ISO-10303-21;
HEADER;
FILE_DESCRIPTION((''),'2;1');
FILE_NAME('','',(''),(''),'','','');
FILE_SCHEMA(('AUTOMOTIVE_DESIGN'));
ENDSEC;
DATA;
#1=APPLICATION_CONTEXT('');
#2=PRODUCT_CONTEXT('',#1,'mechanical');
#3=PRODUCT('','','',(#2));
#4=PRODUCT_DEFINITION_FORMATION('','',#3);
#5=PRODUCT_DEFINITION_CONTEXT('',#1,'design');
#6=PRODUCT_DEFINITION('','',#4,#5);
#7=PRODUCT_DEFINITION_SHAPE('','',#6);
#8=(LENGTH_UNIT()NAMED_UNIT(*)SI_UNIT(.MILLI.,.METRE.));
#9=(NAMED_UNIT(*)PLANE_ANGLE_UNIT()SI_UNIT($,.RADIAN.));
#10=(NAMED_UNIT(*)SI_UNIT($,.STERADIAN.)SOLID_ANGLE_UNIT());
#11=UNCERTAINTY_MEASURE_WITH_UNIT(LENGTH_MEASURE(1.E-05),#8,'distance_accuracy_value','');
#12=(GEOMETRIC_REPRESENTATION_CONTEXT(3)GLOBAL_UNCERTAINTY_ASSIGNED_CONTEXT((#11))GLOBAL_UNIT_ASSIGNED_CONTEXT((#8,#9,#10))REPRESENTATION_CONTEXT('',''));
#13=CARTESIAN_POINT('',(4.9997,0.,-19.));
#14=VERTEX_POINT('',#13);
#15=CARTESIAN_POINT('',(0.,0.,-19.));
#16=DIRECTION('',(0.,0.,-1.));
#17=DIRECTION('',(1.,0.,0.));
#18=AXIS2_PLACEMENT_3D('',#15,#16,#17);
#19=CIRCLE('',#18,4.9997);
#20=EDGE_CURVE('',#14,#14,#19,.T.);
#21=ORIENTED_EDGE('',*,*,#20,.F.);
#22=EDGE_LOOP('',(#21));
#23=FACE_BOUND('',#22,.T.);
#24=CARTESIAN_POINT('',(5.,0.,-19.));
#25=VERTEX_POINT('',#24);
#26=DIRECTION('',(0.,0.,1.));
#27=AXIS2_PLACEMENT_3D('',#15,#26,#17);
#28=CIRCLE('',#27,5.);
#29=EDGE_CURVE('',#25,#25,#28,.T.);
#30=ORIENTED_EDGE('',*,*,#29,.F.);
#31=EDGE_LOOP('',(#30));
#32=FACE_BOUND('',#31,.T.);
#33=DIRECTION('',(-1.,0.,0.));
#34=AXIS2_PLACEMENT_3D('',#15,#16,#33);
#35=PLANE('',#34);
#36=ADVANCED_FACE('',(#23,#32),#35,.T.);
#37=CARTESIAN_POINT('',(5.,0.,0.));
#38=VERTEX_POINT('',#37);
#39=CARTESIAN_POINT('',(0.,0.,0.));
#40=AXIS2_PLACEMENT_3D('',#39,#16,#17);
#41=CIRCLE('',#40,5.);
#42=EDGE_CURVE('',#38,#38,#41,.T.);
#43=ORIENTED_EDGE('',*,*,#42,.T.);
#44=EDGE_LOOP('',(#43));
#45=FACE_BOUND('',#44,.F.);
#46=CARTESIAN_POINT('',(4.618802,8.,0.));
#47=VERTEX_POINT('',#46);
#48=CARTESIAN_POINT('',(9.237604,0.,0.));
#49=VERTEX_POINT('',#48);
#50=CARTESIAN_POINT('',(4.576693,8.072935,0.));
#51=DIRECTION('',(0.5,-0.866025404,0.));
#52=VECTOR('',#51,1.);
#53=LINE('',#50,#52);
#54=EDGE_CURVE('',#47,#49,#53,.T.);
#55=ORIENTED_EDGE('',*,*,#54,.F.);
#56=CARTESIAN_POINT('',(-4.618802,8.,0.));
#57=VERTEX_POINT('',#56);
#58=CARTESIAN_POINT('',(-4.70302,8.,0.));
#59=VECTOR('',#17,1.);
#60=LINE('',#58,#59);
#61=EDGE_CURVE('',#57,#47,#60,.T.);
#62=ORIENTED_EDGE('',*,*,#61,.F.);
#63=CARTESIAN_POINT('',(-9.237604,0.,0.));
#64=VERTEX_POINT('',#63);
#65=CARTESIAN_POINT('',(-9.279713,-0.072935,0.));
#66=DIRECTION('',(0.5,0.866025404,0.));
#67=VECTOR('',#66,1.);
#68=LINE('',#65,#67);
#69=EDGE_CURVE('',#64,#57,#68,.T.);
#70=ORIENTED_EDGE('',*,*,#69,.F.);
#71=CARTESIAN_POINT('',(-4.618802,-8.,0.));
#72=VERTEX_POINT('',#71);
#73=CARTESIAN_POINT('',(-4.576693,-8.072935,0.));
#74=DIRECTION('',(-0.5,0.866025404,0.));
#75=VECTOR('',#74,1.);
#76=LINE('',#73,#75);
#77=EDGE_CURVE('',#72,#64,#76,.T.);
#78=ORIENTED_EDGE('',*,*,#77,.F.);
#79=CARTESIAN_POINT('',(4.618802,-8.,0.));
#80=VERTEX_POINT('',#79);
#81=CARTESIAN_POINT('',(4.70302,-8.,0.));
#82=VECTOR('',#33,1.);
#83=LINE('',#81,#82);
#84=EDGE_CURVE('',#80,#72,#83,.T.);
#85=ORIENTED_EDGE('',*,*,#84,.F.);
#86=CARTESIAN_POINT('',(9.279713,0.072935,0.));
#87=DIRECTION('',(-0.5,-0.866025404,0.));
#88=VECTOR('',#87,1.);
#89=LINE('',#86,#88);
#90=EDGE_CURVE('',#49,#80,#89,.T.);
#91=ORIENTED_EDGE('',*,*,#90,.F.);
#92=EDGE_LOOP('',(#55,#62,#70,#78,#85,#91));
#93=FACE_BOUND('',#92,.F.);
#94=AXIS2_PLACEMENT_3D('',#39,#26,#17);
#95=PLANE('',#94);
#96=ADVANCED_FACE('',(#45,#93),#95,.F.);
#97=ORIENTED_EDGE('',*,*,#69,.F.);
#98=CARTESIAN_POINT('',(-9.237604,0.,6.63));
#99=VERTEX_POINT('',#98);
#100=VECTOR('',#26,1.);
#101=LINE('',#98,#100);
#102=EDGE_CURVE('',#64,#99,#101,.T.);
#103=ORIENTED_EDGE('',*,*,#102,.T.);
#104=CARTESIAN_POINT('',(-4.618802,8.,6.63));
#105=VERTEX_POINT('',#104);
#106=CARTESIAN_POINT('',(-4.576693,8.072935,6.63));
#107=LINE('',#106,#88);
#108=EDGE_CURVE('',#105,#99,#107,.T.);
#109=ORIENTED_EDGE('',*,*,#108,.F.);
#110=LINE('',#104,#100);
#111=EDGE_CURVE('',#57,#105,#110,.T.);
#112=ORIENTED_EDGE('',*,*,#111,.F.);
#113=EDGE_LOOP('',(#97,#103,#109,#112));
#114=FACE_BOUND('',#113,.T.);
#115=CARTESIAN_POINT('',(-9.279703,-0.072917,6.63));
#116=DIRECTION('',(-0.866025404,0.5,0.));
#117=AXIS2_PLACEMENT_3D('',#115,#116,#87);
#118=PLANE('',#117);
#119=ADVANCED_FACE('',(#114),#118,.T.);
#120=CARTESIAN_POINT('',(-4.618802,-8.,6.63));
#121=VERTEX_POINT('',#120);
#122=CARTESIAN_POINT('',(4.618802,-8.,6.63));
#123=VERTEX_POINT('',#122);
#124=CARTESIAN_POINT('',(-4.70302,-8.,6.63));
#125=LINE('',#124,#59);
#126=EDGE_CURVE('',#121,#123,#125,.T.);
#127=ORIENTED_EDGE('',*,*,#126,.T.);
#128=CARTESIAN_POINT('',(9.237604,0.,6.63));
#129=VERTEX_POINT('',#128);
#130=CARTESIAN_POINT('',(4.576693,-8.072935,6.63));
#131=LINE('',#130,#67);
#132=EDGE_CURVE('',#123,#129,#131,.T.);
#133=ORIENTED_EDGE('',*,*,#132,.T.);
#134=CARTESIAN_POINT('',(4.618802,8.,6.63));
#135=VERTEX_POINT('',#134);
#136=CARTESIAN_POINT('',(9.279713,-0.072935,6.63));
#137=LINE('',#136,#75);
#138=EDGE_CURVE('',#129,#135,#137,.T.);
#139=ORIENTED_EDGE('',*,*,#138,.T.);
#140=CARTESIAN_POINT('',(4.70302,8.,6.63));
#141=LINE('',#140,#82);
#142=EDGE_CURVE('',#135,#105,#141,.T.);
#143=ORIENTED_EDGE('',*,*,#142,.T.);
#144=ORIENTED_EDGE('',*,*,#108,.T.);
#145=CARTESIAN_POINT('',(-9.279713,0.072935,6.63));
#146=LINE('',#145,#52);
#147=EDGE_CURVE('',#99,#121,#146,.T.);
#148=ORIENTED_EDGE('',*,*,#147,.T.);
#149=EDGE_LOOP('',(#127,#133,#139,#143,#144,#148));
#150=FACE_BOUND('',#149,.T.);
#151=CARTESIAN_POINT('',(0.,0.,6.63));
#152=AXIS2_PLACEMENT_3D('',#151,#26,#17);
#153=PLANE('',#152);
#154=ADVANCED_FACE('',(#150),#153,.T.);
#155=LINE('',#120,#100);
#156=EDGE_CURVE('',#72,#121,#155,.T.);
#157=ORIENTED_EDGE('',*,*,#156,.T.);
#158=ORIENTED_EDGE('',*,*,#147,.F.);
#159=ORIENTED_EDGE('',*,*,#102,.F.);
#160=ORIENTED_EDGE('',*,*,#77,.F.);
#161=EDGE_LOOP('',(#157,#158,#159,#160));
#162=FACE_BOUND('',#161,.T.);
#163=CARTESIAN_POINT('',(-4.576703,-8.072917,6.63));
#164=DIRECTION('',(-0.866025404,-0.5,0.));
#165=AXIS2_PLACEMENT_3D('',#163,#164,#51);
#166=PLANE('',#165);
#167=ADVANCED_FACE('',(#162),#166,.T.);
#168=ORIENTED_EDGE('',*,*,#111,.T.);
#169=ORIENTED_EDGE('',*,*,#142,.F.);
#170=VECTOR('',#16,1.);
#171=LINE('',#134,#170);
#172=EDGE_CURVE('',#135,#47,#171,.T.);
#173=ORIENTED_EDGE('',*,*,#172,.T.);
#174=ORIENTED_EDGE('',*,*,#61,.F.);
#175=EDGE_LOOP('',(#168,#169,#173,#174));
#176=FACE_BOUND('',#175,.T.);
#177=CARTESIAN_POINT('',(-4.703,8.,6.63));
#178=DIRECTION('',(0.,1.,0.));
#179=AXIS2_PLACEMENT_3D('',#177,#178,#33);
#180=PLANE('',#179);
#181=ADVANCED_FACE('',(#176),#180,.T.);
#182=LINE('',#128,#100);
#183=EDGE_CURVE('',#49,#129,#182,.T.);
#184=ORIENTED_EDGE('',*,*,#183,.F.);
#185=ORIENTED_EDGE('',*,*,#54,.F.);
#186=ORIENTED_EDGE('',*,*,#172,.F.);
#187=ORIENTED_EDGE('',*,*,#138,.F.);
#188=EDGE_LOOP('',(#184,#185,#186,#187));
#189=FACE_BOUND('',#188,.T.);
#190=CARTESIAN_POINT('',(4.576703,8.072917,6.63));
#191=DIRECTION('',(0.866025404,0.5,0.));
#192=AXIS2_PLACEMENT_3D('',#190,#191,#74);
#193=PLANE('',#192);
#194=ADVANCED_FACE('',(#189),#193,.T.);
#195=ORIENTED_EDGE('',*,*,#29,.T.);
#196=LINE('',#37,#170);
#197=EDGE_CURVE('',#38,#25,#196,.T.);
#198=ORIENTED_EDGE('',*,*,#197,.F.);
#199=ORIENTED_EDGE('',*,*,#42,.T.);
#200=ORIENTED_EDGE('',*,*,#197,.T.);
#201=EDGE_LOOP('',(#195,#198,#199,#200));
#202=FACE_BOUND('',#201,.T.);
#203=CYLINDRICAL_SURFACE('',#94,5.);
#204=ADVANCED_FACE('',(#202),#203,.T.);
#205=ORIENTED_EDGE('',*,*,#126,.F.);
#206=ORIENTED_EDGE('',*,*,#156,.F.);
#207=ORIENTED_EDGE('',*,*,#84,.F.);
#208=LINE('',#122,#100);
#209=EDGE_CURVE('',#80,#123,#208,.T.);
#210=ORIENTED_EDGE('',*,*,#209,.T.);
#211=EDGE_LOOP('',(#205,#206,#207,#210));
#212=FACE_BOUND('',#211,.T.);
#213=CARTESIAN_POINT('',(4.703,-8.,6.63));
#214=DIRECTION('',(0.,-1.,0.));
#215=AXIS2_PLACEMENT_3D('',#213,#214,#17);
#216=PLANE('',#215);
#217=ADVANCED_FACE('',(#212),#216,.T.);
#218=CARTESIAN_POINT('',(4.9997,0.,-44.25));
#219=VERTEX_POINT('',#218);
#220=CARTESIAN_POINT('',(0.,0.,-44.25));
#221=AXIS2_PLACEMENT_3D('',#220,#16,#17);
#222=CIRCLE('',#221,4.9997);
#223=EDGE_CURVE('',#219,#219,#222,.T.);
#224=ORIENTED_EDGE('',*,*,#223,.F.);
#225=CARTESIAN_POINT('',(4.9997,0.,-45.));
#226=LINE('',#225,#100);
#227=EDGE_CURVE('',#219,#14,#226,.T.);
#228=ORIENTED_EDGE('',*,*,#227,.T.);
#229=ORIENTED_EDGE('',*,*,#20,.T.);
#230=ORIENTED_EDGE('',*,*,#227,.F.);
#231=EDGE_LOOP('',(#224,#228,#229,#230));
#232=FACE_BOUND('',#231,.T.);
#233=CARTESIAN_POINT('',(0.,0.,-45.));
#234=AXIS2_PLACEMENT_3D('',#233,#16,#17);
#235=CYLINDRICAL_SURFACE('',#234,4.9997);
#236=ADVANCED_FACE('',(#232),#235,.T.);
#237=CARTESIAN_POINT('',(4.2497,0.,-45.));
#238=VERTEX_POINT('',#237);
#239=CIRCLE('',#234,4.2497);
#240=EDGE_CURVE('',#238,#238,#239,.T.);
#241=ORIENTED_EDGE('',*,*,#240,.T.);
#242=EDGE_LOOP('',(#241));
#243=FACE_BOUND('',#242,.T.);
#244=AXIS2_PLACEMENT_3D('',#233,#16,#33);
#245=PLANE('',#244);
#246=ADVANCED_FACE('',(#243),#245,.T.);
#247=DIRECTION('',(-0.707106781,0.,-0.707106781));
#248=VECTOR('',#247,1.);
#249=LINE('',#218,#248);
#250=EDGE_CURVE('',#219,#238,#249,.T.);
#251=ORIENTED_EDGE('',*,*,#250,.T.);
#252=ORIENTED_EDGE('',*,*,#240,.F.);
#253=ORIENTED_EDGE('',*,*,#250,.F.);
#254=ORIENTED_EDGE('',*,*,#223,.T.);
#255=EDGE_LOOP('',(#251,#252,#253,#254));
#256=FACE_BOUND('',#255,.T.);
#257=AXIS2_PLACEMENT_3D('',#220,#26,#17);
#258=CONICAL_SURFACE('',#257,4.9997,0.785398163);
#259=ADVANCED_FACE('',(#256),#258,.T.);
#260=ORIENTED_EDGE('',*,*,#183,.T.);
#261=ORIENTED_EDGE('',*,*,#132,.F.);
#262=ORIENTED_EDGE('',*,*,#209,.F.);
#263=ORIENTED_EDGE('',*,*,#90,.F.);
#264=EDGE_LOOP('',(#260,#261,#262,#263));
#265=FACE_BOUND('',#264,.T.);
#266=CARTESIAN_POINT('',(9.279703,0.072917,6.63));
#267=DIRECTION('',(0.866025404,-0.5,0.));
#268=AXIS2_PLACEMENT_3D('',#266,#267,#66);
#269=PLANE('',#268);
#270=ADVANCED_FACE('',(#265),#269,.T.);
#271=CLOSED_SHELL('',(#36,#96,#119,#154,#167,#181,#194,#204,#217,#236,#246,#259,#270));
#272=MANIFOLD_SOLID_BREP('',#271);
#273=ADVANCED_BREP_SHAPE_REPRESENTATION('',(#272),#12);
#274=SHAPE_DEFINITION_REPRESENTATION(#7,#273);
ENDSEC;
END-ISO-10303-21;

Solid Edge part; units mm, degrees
sketch "Sketch1" plane through (0, 0, 0) normal (0, 0, 1) x (1, 0, 0)
  circle A0 centre (0, 0) radius 9.28
  dimension "D1" = 18.56
extrude "Protrusion1" add sketch "Sketch1" along normal blind 6.63
sketch "Sketch2" plane through (0, 0, 0) normal (0, 0, -1) x (1, 0, 0)
  circle A0 centre (0, 0) radius 5
extrude "Protrusion2" add sketch "Sketch2" along normal blind 45
sketch "Sketch3" plane through (0, 0, -45) normal (0, 0, -1) x (1, 0, 0)
  circle A0 centre (0, 0) radius 4.9997
extrude "Cutout1" cut sketch "Sketch3" against normal blind 26 flip side to cut
chamfer "Chamfer_1" distance 0.75 angle 45 1 edges at (-4.9997, 0, -45)
sketch "Sketch4" plane through (0, 0, 6.63) normal (0, 0, 1) x (1, 0, 0)
  line L0 (-4.703, 8) -> (4.703, 8)
  dimension "D1" = 16
extrude "Cutout2" cut sketch "Sketch4" against normal up to next material side at (0, 8.05, 6.63)
pattern_circular "Pattern1" count 6 over 360 about axis through (0, 0, 6.63) along (0, 0, 1) of "Cutout2"
properties part number "24104866"
